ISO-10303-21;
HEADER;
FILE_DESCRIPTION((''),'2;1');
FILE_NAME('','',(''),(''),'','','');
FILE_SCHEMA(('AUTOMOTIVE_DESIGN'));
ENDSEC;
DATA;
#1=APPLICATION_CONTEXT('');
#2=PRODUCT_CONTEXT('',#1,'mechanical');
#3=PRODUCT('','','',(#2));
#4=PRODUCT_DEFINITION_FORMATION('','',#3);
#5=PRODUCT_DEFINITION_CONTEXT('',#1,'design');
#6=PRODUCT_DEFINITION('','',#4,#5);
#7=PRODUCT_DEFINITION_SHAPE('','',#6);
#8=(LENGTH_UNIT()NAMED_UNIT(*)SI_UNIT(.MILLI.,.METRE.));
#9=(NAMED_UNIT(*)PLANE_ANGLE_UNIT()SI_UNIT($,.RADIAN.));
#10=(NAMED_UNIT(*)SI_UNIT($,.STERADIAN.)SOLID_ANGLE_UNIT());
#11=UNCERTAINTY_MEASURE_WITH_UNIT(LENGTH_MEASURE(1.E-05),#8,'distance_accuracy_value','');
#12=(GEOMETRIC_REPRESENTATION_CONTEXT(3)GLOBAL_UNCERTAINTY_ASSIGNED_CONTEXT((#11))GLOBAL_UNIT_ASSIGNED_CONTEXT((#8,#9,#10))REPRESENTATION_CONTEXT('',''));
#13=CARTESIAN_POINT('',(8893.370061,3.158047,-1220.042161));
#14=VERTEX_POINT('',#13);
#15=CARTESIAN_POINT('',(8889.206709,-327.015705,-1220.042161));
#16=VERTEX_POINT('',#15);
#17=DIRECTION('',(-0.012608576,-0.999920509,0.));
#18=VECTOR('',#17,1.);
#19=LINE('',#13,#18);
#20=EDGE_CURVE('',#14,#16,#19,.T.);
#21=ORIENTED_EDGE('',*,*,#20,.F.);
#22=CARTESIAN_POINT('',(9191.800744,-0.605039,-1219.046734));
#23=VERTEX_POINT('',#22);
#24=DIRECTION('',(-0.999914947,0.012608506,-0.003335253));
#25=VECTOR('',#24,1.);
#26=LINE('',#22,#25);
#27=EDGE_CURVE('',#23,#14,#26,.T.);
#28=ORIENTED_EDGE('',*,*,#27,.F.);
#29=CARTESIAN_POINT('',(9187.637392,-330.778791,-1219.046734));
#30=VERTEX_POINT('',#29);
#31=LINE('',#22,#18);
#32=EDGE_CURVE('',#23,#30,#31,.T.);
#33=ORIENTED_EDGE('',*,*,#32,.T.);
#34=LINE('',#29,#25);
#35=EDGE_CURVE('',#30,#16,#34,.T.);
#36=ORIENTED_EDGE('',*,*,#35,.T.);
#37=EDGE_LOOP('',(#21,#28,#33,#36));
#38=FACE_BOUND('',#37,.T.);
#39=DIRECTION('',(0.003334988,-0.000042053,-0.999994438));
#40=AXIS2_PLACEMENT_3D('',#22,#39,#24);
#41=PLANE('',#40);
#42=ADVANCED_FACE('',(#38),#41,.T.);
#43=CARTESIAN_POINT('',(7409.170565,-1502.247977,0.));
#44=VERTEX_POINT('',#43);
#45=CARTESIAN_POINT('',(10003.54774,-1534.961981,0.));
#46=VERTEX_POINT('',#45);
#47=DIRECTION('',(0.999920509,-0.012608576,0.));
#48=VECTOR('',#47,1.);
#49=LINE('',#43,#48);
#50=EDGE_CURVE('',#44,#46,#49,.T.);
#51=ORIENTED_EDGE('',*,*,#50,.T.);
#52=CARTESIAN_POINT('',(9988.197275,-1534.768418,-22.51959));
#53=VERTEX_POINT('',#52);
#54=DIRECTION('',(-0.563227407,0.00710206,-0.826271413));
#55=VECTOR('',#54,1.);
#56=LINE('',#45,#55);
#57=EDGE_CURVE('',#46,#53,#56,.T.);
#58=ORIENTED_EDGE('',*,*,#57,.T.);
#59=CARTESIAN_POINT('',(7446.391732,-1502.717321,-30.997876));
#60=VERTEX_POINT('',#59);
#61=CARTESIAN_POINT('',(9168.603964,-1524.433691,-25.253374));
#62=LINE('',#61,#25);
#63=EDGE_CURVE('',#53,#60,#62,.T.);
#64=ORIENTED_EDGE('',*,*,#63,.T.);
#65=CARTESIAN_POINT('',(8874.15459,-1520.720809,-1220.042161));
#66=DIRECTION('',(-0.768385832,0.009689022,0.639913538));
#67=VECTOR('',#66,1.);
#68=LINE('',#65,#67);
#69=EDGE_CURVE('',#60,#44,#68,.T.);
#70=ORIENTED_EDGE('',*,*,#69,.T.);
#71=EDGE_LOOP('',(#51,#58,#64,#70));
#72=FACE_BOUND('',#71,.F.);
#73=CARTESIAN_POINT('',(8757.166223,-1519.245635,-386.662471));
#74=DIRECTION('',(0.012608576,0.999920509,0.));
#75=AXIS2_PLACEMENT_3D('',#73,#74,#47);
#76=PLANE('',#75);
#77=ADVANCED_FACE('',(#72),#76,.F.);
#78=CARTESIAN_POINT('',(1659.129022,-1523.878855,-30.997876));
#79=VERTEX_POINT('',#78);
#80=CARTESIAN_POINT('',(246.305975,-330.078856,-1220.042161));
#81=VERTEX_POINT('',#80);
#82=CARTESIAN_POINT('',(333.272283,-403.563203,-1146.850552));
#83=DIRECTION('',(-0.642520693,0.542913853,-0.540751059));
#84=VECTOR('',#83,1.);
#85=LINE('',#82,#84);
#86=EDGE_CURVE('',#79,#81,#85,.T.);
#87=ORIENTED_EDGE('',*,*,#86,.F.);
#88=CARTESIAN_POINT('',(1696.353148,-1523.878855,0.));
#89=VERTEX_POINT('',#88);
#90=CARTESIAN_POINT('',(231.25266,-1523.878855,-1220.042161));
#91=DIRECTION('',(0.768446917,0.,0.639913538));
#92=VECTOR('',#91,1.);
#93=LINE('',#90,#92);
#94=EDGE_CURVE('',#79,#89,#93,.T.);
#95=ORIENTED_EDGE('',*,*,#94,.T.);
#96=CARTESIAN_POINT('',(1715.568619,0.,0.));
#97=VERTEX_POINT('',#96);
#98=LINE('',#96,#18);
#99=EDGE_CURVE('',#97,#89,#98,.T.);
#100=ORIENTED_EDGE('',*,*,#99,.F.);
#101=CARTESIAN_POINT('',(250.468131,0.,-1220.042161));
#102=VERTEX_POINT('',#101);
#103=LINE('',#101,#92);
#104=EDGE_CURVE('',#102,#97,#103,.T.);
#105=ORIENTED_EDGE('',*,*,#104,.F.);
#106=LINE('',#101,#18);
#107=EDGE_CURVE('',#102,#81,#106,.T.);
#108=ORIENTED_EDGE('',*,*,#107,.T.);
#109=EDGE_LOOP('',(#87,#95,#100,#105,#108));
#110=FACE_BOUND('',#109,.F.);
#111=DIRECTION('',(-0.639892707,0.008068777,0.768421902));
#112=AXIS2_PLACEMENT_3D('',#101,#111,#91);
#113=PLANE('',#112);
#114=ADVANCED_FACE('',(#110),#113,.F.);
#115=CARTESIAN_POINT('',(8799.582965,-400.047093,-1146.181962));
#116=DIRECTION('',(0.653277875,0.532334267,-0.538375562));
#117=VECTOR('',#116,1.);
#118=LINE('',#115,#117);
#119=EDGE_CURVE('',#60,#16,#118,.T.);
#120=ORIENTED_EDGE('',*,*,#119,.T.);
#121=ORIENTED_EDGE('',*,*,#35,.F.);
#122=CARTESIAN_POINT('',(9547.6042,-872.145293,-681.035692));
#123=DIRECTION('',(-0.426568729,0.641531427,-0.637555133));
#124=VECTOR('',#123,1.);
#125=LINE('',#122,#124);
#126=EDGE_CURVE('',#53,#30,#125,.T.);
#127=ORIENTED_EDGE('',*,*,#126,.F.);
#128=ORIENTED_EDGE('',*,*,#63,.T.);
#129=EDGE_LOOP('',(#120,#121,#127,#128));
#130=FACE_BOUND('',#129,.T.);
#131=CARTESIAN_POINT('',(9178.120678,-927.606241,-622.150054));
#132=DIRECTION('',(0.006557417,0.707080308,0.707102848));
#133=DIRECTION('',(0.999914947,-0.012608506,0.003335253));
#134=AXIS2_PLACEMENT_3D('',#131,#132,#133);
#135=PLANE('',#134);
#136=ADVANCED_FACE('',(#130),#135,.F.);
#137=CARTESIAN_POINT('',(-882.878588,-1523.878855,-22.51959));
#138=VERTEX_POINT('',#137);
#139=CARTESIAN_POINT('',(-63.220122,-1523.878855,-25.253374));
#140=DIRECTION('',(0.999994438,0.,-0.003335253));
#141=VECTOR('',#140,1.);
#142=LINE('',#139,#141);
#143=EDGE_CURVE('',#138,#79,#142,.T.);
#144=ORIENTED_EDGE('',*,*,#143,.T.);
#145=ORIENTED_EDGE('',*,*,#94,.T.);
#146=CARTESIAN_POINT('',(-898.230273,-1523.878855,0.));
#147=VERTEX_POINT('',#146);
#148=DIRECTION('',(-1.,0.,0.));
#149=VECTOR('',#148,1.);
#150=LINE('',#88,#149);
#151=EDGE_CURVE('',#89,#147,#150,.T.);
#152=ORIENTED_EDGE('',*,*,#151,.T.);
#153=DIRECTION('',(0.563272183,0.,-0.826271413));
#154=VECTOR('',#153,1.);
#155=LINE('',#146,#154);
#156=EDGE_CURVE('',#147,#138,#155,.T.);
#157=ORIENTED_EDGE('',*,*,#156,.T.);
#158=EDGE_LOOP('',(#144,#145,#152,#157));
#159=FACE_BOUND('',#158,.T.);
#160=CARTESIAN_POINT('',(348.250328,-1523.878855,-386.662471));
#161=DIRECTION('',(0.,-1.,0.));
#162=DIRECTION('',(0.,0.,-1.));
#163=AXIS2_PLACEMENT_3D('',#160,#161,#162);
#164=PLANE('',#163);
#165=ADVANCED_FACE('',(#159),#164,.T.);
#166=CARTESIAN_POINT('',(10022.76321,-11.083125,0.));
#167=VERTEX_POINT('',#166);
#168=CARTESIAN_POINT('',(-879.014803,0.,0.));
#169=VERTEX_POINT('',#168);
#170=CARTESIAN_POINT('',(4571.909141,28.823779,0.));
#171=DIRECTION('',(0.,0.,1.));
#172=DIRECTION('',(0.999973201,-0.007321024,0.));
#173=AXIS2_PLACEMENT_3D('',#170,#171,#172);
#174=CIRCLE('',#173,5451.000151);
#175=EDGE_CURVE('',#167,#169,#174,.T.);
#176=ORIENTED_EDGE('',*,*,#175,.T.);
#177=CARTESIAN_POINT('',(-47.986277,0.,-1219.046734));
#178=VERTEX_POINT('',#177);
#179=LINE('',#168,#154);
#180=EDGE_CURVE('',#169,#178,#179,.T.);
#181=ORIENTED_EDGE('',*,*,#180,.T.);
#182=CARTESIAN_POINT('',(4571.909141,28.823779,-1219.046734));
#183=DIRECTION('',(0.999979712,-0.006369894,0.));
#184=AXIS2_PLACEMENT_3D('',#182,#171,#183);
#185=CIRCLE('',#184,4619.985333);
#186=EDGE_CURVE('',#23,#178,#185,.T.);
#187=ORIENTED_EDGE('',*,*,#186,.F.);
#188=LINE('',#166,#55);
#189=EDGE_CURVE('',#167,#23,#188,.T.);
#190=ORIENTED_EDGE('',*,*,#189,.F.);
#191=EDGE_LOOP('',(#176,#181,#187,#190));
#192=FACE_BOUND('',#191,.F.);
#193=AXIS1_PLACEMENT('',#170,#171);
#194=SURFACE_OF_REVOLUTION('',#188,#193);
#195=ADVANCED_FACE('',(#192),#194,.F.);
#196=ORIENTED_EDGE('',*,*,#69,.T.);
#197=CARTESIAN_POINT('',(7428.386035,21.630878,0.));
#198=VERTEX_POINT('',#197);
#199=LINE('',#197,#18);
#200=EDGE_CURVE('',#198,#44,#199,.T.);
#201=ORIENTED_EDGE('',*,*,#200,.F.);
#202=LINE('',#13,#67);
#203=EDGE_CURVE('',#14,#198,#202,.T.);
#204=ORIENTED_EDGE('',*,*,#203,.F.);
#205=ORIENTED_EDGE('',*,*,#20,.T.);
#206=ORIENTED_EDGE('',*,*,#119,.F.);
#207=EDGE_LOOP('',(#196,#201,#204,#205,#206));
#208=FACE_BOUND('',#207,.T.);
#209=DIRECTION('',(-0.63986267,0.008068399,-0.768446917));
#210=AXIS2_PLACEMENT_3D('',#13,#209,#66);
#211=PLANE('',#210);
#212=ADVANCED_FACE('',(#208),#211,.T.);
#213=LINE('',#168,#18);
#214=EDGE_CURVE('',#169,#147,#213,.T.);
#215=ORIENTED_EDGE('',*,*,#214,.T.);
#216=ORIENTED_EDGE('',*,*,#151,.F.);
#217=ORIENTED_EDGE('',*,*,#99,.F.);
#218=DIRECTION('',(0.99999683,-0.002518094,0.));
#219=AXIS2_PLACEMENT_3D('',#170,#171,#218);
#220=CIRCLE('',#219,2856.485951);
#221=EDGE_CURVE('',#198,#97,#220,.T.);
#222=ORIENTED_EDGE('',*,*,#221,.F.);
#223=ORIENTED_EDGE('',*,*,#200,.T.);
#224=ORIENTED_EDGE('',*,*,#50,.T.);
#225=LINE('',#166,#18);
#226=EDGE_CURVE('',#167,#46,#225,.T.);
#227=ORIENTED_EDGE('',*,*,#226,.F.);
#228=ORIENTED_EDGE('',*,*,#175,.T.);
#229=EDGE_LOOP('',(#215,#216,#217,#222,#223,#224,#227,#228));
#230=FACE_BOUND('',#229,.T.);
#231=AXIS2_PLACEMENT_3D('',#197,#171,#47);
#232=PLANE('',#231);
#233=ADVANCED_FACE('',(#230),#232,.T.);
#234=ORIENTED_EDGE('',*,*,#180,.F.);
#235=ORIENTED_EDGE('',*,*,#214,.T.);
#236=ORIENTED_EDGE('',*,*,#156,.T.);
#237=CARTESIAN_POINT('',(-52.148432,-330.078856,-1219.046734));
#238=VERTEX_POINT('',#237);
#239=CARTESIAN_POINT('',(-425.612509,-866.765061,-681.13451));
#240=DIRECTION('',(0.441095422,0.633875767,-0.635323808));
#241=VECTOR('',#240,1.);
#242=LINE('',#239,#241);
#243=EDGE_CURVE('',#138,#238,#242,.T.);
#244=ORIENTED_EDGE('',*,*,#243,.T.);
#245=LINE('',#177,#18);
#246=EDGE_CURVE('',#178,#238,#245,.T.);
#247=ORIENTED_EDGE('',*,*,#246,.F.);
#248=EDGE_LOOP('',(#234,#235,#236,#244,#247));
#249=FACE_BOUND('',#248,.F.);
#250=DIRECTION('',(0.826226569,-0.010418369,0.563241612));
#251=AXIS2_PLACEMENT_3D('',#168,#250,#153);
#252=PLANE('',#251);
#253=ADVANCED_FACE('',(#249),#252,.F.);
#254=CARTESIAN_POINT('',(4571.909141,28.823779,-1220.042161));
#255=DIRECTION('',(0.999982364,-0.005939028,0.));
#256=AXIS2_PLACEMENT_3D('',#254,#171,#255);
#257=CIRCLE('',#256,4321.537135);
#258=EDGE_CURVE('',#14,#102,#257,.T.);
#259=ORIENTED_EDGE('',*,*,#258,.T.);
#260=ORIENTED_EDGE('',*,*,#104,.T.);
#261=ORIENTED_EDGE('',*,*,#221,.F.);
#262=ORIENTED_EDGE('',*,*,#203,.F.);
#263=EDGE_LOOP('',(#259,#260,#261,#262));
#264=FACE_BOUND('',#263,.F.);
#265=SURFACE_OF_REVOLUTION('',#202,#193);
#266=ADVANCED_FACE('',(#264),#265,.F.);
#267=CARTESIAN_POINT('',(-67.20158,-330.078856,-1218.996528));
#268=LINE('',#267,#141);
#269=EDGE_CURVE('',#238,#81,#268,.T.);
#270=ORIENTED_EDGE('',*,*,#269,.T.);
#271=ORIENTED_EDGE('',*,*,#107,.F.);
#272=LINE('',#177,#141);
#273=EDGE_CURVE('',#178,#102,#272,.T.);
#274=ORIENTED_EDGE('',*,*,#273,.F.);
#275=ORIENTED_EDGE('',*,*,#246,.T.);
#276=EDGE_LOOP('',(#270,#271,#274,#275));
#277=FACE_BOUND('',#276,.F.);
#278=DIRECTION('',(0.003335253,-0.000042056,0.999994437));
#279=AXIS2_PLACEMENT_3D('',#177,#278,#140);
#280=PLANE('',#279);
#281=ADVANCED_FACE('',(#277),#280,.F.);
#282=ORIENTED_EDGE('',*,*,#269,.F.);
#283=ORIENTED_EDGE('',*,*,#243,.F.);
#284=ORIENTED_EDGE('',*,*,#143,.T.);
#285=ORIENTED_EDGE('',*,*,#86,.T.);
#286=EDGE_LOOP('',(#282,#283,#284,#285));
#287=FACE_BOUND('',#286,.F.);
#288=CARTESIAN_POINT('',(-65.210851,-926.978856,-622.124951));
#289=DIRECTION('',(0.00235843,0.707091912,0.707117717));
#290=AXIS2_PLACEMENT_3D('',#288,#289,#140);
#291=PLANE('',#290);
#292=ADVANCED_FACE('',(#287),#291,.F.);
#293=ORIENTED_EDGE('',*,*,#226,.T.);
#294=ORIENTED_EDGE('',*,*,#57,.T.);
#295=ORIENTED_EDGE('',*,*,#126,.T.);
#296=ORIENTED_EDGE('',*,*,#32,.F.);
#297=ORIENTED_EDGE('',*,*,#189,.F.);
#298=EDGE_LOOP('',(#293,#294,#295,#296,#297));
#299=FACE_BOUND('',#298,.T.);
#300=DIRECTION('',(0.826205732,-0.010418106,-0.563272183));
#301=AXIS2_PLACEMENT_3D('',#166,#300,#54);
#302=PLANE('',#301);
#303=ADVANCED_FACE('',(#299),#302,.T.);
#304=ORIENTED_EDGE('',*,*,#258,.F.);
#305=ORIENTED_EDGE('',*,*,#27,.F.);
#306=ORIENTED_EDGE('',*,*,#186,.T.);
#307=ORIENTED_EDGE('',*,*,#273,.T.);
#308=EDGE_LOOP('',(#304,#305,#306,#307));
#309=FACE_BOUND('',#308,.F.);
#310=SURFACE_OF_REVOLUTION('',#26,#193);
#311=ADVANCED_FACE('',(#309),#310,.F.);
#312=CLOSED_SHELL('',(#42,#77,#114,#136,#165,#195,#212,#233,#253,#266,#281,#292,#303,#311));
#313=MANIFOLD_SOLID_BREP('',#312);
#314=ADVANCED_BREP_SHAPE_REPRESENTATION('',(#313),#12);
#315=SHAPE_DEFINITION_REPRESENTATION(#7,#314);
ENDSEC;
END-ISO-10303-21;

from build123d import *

# Parameters (mm, degrees)
F3_DEPTH = 1524
F4_SIZE  = 1193.8


# Not quite as in the source:
# - two fillets or chamfers of one size are made in one step


with BuildPart() as f2:
    # F2: sweep along a path in F0
    with BuildLine(Plane.XY) as f2_path:
        ThreePointArc((9143.8182811757, 0), (4571.9091405878, 4600.8237785405), (0, 0))
    # F1 (on Front) → F2 (sweep)
    with BuildSketch(Plane.XZ):
        Polygon((1715.5686188401, 0), (0, 0), (-879.0148030063, 0), (-47.9862770429, -1219.0467339141), (250.468130578, -1220.0421605104), align=None)
    sweep(path=f2_path.line)

    # F3 (add): faces of the model
    f3_faces = [f2.faces().sort_by_distance(p)[0] for p in [
        (8841.9781663596, 3.806076708, -448.4847642762),
        (301.8641103743, 0, -448.4847642762),
    ]]
    extrude(f3_faces, amount=F3_DEPTH, dir=(-0.0126085764, -0.9999205087, 0))

    # F4
    f4_edges = [f2.edges().sort_by_distance(p)[0] for p in [
        (9023.369932, -1522.602351, -1219.544447),
        (82.025456, -1523.878855, -1219.544447),
    ]]
    chamfer(f4_edges, length=F4_SIZE)


solid = f2.part
